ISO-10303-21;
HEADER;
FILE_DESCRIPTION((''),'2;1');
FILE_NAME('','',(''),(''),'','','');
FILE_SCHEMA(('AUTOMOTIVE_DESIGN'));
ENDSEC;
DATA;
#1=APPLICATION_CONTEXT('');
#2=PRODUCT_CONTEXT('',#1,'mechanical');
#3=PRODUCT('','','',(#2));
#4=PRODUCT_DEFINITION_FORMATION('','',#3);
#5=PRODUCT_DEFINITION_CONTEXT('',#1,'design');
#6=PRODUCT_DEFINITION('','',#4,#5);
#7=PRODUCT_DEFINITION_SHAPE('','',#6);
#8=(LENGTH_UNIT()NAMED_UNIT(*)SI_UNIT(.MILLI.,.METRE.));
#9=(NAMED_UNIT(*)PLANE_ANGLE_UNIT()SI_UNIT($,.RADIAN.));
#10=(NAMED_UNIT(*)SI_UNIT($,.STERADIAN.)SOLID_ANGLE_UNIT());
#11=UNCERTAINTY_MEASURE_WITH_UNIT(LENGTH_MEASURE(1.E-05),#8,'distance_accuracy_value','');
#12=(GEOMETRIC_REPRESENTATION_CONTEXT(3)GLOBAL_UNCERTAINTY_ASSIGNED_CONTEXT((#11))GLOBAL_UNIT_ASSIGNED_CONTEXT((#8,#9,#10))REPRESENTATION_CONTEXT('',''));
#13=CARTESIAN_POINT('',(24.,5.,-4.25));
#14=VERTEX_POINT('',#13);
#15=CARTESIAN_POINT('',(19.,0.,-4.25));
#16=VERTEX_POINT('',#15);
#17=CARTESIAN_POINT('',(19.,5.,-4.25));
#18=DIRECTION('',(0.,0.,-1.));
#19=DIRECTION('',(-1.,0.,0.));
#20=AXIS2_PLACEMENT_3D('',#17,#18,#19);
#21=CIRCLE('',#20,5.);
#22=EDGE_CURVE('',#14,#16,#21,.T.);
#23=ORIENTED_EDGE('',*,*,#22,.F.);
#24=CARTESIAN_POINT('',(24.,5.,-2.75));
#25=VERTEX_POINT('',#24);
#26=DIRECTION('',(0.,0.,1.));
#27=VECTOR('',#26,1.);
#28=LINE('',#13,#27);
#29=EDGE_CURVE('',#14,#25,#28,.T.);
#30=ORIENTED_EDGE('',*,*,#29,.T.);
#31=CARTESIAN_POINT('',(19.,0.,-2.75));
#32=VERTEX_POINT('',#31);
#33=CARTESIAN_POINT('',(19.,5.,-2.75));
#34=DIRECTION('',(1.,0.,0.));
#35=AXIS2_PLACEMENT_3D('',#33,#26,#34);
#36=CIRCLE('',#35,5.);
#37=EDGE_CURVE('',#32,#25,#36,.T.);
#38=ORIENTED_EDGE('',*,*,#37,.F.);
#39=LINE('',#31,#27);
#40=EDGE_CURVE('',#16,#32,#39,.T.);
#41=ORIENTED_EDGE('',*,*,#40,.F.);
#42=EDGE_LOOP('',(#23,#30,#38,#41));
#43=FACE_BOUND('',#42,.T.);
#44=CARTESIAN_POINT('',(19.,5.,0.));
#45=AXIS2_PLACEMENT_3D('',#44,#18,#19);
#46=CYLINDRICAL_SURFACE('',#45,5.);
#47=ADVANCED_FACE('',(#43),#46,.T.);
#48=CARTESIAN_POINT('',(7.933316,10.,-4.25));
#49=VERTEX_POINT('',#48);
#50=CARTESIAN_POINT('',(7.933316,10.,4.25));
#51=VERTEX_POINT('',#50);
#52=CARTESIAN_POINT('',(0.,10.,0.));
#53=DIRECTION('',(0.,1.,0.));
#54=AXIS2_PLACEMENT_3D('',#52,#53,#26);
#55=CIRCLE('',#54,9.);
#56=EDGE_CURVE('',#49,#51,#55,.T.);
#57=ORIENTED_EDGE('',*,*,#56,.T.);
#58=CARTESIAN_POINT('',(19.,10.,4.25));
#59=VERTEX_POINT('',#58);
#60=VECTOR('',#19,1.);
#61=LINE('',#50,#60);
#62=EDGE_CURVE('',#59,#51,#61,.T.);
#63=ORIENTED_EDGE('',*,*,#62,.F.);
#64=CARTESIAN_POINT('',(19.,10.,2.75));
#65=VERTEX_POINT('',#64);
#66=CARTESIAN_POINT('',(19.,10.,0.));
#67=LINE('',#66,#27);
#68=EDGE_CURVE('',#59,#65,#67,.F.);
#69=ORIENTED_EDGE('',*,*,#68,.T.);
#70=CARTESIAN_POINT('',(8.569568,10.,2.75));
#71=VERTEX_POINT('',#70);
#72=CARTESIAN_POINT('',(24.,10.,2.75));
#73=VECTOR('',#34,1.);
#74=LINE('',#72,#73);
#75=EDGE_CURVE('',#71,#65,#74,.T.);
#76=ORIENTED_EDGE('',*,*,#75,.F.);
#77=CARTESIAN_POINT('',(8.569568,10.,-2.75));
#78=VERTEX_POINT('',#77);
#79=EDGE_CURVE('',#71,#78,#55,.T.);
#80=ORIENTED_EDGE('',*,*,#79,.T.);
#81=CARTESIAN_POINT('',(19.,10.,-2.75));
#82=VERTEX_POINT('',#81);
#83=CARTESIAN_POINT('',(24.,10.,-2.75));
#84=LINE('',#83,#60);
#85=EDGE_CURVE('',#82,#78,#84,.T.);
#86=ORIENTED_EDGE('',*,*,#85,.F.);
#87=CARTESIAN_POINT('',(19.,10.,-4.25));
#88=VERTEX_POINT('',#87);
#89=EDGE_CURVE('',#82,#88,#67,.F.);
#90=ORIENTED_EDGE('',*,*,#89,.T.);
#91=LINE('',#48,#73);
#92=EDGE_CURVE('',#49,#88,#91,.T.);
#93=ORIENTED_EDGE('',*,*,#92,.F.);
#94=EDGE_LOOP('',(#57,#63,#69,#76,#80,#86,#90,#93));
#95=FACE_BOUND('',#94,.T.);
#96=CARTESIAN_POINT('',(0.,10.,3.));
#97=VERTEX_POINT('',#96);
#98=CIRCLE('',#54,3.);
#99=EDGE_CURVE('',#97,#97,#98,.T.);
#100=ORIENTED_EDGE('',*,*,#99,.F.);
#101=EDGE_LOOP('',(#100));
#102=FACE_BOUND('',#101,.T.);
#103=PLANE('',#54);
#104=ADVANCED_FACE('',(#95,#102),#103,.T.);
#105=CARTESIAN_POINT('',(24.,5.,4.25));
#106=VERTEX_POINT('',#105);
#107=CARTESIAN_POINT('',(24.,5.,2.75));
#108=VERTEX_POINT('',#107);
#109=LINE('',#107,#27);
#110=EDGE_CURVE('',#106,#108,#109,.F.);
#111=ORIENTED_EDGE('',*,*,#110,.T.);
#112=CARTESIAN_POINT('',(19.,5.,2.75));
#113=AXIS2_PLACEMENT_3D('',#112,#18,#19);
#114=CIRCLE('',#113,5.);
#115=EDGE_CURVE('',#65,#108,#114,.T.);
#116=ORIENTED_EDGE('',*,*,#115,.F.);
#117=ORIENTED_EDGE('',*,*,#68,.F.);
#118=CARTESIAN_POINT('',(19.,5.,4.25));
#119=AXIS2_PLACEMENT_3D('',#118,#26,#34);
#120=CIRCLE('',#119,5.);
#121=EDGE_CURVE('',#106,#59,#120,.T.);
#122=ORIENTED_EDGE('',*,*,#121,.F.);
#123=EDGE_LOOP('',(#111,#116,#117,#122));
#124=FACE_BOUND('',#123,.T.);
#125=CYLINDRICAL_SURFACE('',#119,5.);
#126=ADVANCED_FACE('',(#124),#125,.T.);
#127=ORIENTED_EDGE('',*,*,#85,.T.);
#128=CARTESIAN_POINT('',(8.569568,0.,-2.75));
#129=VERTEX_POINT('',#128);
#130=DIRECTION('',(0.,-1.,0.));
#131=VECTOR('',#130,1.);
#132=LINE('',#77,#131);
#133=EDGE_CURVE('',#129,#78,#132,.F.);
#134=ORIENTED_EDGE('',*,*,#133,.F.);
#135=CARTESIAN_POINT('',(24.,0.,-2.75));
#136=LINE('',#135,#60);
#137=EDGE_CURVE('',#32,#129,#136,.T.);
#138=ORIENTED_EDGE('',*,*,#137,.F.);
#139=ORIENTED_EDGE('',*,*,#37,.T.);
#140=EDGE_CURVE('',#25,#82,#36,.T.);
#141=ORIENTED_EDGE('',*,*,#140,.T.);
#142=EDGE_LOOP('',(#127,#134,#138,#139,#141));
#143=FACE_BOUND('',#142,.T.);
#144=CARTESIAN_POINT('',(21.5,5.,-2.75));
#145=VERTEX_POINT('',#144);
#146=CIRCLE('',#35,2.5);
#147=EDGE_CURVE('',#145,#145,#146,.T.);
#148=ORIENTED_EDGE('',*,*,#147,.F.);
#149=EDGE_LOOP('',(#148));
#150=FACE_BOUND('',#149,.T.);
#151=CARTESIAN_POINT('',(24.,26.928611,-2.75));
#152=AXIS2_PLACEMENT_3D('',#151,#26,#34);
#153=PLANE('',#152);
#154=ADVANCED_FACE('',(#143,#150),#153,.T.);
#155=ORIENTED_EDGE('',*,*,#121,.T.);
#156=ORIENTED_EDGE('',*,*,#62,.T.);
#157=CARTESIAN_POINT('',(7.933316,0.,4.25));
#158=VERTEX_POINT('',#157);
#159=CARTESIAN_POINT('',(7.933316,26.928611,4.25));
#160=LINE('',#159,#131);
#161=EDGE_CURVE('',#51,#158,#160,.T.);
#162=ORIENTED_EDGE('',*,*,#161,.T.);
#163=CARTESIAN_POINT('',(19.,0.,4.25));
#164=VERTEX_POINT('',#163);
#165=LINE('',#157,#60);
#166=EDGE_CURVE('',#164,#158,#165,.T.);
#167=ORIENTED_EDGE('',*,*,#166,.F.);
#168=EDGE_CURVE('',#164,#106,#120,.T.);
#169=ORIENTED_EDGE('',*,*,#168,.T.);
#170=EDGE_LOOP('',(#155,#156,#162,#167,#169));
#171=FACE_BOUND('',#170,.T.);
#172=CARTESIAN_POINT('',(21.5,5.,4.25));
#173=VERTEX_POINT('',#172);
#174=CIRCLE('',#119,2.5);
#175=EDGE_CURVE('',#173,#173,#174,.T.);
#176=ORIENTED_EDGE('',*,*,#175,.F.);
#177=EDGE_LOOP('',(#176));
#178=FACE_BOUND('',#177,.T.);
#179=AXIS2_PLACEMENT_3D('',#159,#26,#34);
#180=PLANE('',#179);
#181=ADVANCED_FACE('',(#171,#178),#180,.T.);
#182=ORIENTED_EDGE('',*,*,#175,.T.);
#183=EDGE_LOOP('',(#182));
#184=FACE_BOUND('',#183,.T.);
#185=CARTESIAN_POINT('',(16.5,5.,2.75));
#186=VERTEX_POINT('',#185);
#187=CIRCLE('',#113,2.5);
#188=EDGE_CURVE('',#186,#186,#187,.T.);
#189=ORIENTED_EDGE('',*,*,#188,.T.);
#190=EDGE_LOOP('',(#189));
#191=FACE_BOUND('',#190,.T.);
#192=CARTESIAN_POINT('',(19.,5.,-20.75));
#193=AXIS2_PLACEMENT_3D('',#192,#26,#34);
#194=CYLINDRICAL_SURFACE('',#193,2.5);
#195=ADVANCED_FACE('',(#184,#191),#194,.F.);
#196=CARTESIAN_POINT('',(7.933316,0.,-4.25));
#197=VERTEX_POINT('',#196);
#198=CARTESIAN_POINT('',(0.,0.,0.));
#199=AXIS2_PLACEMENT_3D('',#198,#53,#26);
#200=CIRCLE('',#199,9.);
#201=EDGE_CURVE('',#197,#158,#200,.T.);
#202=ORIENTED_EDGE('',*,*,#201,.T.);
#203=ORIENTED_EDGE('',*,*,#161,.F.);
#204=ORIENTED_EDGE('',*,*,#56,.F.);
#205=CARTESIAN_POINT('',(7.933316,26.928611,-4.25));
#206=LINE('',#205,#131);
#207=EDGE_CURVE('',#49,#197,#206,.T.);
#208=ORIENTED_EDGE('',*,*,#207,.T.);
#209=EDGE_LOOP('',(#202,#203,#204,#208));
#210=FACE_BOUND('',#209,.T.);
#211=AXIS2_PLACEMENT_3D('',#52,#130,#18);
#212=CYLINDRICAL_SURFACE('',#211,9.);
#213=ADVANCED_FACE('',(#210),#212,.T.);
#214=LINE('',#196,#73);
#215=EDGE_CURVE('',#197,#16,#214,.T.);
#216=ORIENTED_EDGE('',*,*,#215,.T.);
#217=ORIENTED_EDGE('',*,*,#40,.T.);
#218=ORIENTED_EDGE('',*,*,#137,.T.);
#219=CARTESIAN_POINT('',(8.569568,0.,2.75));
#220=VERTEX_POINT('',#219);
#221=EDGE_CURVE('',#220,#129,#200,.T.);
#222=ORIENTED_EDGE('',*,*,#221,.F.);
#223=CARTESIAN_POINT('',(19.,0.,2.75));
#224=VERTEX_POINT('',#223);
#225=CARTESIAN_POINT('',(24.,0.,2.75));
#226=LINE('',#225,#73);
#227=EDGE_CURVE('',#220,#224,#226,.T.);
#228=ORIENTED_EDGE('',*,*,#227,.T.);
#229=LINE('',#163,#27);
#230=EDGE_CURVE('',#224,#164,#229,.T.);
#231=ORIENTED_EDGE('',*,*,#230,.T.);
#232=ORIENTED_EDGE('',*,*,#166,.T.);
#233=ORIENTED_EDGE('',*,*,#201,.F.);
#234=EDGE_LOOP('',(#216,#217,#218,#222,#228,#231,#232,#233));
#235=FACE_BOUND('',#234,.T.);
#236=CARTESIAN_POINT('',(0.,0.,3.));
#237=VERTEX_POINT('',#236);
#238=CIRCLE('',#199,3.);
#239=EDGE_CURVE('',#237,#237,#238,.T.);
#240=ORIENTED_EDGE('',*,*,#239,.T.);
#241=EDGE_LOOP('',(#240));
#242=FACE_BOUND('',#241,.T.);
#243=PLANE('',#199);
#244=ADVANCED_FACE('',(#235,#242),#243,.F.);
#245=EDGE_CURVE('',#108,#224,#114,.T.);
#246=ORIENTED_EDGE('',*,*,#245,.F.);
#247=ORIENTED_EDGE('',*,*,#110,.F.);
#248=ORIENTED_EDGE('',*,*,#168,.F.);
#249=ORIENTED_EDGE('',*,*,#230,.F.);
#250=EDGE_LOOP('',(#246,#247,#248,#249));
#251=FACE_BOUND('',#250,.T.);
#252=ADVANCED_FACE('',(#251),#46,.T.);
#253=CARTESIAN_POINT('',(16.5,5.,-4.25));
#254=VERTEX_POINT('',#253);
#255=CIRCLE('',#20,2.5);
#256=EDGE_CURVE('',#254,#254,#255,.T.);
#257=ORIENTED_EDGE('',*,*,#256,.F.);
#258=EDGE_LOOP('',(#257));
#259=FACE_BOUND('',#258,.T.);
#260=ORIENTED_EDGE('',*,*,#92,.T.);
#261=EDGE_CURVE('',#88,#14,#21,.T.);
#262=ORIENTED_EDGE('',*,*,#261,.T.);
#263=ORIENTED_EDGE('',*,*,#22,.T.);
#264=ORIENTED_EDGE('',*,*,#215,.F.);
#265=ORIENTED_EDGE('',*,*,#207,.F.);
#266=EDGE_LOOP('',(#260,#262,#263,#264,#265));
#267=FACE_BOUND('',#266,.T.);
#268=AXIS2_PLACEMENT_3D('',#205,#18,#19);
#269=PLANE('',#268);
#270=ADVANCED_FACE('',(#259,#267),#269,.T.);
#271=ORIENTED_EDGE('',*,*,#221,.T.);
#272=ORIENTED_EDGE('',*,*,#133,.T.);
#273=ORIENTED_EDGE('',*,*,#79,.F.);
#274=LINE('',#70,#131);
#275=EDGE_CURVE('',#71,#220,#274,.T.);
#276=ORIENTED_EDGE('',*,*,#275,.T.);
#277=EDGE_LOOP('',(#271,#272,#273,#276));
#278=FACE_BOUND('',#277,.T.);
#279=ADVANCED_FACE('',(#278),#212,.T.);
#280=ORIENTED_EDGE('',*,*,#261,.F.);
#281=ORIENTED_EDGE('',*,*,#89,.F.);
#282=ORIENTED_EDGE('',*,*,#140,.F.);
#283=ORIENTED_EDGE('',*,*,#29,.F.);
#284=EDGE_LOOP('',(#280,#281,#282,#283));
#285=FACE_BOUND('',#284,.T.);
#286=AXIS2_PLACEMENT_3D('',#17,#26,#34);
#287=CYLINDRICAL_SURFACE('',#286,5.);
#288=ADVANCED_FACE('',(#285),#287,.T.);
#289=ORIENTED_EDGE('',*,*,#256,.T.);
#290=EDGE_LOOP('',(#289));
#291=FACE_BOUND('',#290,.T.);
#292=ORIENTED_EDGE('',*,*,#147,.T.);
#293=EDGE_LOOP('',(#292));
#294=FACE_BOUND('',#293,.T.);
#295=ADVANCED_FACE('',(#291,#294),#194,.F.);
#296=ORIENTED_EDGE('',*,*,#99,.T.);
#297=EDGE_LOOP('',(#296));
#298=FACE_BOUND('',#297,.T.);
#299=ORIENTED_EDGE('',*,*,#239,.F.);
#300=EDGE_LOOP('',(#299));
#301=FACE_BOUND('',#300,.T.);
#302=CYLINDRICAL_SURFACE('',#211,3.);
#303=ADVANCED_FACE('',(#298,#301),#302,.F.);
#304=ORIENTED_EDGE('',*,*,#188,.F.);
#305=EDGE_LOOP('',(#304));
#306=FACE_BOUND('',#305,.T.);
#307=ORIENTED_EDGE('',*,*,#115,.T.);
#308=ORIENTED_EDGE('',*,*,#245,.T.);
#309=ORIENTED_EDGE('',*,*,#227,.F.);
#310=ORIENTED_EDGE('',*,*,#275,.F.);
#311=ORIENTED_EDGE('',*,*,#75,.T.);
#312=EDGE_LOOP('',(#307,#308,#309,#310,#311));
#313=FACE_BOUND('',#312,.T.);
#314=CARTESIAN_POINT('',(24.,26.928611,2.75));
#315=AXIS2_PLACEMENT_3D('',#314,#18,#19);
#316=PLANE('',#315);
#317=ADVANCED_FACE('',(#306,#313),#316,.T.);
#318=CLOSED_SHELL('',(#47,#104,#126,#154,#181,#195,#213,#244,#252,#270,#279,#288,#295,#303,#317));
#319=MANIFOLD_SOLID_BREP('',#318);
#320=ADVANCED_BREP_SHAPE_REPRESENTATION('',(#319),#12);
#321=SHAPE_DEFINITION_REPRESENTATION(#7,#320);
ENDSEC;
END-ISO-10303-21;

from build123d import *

# Parameters (mm, degrees)
SKETCH1_R           = 9
SKETCH1_R_2         = 3
BOSS_EXTRUDE1_DEPTH = 10
BOSS_EXTRUDE3_DEPTH = 10
FILLET1_R           = 5
SKETCH6_R           = 2.5
CUT_EXTRUDE2_DEPTH  = 25


with BuildPart() as part:
    # Sketch1 → Boss-Extrude1 (new body)
    with BuildSketch(Plane(origin=(0, 0, 0), x_dir=(1, 0, 0), z_dir=(0, 1, 0))):
        with Locations(Location((0, 0, 0), (0, 0, 270))):
            Circle(SKETCH1_R)
        with Locations(Location((0, 0, 0), (0, 0, 270))):
            Circle(SKETCH1_R_2, mode=Mode.SUBTRACT)
    extrude(amount=BOSS_EXTRUDE1_DEPTH)

    # Sketch5 → Boss-Extrude3 (add)
    with BuildSketch(Plane.XZ):
        Polygon((7.933315826, 4.25), (24, 4.25), (24, 2.75), (7.137975048, 2.75), align=None)
        Polygon((7.137975048, -2.75), (7.933315826, -4.25), (24, -4.25), (24, -2.75), align=None)
    extrude(amount=-BOSS_EXTRUDE3_DEPTH)

    # Fillet1
    fillet1_edges = [part.edges().sort_by_distance(p)[0] for p in [
        (24, 0, -3.5),
        (24, 10, -3.5),
        (24, 10, 3.5),
        (24, 0, 3.5),
    ]]
    fillet(fillet1_edges, radius=FILLET1_R - 0.0001)  # a hair under: the kernel refuses the full size

    # Sketch6 → Cut-Extrude2 (cut)
    with BuildSketch(Plane.XY.offset(4.25)):
        with Locations((19, 5)):
            Circle(SKETCH6_R)
    extrude(amount=-CUT_EXTRUDE2_DEPTH, mode=Mode.SUBTRACT)


solid = part.part
